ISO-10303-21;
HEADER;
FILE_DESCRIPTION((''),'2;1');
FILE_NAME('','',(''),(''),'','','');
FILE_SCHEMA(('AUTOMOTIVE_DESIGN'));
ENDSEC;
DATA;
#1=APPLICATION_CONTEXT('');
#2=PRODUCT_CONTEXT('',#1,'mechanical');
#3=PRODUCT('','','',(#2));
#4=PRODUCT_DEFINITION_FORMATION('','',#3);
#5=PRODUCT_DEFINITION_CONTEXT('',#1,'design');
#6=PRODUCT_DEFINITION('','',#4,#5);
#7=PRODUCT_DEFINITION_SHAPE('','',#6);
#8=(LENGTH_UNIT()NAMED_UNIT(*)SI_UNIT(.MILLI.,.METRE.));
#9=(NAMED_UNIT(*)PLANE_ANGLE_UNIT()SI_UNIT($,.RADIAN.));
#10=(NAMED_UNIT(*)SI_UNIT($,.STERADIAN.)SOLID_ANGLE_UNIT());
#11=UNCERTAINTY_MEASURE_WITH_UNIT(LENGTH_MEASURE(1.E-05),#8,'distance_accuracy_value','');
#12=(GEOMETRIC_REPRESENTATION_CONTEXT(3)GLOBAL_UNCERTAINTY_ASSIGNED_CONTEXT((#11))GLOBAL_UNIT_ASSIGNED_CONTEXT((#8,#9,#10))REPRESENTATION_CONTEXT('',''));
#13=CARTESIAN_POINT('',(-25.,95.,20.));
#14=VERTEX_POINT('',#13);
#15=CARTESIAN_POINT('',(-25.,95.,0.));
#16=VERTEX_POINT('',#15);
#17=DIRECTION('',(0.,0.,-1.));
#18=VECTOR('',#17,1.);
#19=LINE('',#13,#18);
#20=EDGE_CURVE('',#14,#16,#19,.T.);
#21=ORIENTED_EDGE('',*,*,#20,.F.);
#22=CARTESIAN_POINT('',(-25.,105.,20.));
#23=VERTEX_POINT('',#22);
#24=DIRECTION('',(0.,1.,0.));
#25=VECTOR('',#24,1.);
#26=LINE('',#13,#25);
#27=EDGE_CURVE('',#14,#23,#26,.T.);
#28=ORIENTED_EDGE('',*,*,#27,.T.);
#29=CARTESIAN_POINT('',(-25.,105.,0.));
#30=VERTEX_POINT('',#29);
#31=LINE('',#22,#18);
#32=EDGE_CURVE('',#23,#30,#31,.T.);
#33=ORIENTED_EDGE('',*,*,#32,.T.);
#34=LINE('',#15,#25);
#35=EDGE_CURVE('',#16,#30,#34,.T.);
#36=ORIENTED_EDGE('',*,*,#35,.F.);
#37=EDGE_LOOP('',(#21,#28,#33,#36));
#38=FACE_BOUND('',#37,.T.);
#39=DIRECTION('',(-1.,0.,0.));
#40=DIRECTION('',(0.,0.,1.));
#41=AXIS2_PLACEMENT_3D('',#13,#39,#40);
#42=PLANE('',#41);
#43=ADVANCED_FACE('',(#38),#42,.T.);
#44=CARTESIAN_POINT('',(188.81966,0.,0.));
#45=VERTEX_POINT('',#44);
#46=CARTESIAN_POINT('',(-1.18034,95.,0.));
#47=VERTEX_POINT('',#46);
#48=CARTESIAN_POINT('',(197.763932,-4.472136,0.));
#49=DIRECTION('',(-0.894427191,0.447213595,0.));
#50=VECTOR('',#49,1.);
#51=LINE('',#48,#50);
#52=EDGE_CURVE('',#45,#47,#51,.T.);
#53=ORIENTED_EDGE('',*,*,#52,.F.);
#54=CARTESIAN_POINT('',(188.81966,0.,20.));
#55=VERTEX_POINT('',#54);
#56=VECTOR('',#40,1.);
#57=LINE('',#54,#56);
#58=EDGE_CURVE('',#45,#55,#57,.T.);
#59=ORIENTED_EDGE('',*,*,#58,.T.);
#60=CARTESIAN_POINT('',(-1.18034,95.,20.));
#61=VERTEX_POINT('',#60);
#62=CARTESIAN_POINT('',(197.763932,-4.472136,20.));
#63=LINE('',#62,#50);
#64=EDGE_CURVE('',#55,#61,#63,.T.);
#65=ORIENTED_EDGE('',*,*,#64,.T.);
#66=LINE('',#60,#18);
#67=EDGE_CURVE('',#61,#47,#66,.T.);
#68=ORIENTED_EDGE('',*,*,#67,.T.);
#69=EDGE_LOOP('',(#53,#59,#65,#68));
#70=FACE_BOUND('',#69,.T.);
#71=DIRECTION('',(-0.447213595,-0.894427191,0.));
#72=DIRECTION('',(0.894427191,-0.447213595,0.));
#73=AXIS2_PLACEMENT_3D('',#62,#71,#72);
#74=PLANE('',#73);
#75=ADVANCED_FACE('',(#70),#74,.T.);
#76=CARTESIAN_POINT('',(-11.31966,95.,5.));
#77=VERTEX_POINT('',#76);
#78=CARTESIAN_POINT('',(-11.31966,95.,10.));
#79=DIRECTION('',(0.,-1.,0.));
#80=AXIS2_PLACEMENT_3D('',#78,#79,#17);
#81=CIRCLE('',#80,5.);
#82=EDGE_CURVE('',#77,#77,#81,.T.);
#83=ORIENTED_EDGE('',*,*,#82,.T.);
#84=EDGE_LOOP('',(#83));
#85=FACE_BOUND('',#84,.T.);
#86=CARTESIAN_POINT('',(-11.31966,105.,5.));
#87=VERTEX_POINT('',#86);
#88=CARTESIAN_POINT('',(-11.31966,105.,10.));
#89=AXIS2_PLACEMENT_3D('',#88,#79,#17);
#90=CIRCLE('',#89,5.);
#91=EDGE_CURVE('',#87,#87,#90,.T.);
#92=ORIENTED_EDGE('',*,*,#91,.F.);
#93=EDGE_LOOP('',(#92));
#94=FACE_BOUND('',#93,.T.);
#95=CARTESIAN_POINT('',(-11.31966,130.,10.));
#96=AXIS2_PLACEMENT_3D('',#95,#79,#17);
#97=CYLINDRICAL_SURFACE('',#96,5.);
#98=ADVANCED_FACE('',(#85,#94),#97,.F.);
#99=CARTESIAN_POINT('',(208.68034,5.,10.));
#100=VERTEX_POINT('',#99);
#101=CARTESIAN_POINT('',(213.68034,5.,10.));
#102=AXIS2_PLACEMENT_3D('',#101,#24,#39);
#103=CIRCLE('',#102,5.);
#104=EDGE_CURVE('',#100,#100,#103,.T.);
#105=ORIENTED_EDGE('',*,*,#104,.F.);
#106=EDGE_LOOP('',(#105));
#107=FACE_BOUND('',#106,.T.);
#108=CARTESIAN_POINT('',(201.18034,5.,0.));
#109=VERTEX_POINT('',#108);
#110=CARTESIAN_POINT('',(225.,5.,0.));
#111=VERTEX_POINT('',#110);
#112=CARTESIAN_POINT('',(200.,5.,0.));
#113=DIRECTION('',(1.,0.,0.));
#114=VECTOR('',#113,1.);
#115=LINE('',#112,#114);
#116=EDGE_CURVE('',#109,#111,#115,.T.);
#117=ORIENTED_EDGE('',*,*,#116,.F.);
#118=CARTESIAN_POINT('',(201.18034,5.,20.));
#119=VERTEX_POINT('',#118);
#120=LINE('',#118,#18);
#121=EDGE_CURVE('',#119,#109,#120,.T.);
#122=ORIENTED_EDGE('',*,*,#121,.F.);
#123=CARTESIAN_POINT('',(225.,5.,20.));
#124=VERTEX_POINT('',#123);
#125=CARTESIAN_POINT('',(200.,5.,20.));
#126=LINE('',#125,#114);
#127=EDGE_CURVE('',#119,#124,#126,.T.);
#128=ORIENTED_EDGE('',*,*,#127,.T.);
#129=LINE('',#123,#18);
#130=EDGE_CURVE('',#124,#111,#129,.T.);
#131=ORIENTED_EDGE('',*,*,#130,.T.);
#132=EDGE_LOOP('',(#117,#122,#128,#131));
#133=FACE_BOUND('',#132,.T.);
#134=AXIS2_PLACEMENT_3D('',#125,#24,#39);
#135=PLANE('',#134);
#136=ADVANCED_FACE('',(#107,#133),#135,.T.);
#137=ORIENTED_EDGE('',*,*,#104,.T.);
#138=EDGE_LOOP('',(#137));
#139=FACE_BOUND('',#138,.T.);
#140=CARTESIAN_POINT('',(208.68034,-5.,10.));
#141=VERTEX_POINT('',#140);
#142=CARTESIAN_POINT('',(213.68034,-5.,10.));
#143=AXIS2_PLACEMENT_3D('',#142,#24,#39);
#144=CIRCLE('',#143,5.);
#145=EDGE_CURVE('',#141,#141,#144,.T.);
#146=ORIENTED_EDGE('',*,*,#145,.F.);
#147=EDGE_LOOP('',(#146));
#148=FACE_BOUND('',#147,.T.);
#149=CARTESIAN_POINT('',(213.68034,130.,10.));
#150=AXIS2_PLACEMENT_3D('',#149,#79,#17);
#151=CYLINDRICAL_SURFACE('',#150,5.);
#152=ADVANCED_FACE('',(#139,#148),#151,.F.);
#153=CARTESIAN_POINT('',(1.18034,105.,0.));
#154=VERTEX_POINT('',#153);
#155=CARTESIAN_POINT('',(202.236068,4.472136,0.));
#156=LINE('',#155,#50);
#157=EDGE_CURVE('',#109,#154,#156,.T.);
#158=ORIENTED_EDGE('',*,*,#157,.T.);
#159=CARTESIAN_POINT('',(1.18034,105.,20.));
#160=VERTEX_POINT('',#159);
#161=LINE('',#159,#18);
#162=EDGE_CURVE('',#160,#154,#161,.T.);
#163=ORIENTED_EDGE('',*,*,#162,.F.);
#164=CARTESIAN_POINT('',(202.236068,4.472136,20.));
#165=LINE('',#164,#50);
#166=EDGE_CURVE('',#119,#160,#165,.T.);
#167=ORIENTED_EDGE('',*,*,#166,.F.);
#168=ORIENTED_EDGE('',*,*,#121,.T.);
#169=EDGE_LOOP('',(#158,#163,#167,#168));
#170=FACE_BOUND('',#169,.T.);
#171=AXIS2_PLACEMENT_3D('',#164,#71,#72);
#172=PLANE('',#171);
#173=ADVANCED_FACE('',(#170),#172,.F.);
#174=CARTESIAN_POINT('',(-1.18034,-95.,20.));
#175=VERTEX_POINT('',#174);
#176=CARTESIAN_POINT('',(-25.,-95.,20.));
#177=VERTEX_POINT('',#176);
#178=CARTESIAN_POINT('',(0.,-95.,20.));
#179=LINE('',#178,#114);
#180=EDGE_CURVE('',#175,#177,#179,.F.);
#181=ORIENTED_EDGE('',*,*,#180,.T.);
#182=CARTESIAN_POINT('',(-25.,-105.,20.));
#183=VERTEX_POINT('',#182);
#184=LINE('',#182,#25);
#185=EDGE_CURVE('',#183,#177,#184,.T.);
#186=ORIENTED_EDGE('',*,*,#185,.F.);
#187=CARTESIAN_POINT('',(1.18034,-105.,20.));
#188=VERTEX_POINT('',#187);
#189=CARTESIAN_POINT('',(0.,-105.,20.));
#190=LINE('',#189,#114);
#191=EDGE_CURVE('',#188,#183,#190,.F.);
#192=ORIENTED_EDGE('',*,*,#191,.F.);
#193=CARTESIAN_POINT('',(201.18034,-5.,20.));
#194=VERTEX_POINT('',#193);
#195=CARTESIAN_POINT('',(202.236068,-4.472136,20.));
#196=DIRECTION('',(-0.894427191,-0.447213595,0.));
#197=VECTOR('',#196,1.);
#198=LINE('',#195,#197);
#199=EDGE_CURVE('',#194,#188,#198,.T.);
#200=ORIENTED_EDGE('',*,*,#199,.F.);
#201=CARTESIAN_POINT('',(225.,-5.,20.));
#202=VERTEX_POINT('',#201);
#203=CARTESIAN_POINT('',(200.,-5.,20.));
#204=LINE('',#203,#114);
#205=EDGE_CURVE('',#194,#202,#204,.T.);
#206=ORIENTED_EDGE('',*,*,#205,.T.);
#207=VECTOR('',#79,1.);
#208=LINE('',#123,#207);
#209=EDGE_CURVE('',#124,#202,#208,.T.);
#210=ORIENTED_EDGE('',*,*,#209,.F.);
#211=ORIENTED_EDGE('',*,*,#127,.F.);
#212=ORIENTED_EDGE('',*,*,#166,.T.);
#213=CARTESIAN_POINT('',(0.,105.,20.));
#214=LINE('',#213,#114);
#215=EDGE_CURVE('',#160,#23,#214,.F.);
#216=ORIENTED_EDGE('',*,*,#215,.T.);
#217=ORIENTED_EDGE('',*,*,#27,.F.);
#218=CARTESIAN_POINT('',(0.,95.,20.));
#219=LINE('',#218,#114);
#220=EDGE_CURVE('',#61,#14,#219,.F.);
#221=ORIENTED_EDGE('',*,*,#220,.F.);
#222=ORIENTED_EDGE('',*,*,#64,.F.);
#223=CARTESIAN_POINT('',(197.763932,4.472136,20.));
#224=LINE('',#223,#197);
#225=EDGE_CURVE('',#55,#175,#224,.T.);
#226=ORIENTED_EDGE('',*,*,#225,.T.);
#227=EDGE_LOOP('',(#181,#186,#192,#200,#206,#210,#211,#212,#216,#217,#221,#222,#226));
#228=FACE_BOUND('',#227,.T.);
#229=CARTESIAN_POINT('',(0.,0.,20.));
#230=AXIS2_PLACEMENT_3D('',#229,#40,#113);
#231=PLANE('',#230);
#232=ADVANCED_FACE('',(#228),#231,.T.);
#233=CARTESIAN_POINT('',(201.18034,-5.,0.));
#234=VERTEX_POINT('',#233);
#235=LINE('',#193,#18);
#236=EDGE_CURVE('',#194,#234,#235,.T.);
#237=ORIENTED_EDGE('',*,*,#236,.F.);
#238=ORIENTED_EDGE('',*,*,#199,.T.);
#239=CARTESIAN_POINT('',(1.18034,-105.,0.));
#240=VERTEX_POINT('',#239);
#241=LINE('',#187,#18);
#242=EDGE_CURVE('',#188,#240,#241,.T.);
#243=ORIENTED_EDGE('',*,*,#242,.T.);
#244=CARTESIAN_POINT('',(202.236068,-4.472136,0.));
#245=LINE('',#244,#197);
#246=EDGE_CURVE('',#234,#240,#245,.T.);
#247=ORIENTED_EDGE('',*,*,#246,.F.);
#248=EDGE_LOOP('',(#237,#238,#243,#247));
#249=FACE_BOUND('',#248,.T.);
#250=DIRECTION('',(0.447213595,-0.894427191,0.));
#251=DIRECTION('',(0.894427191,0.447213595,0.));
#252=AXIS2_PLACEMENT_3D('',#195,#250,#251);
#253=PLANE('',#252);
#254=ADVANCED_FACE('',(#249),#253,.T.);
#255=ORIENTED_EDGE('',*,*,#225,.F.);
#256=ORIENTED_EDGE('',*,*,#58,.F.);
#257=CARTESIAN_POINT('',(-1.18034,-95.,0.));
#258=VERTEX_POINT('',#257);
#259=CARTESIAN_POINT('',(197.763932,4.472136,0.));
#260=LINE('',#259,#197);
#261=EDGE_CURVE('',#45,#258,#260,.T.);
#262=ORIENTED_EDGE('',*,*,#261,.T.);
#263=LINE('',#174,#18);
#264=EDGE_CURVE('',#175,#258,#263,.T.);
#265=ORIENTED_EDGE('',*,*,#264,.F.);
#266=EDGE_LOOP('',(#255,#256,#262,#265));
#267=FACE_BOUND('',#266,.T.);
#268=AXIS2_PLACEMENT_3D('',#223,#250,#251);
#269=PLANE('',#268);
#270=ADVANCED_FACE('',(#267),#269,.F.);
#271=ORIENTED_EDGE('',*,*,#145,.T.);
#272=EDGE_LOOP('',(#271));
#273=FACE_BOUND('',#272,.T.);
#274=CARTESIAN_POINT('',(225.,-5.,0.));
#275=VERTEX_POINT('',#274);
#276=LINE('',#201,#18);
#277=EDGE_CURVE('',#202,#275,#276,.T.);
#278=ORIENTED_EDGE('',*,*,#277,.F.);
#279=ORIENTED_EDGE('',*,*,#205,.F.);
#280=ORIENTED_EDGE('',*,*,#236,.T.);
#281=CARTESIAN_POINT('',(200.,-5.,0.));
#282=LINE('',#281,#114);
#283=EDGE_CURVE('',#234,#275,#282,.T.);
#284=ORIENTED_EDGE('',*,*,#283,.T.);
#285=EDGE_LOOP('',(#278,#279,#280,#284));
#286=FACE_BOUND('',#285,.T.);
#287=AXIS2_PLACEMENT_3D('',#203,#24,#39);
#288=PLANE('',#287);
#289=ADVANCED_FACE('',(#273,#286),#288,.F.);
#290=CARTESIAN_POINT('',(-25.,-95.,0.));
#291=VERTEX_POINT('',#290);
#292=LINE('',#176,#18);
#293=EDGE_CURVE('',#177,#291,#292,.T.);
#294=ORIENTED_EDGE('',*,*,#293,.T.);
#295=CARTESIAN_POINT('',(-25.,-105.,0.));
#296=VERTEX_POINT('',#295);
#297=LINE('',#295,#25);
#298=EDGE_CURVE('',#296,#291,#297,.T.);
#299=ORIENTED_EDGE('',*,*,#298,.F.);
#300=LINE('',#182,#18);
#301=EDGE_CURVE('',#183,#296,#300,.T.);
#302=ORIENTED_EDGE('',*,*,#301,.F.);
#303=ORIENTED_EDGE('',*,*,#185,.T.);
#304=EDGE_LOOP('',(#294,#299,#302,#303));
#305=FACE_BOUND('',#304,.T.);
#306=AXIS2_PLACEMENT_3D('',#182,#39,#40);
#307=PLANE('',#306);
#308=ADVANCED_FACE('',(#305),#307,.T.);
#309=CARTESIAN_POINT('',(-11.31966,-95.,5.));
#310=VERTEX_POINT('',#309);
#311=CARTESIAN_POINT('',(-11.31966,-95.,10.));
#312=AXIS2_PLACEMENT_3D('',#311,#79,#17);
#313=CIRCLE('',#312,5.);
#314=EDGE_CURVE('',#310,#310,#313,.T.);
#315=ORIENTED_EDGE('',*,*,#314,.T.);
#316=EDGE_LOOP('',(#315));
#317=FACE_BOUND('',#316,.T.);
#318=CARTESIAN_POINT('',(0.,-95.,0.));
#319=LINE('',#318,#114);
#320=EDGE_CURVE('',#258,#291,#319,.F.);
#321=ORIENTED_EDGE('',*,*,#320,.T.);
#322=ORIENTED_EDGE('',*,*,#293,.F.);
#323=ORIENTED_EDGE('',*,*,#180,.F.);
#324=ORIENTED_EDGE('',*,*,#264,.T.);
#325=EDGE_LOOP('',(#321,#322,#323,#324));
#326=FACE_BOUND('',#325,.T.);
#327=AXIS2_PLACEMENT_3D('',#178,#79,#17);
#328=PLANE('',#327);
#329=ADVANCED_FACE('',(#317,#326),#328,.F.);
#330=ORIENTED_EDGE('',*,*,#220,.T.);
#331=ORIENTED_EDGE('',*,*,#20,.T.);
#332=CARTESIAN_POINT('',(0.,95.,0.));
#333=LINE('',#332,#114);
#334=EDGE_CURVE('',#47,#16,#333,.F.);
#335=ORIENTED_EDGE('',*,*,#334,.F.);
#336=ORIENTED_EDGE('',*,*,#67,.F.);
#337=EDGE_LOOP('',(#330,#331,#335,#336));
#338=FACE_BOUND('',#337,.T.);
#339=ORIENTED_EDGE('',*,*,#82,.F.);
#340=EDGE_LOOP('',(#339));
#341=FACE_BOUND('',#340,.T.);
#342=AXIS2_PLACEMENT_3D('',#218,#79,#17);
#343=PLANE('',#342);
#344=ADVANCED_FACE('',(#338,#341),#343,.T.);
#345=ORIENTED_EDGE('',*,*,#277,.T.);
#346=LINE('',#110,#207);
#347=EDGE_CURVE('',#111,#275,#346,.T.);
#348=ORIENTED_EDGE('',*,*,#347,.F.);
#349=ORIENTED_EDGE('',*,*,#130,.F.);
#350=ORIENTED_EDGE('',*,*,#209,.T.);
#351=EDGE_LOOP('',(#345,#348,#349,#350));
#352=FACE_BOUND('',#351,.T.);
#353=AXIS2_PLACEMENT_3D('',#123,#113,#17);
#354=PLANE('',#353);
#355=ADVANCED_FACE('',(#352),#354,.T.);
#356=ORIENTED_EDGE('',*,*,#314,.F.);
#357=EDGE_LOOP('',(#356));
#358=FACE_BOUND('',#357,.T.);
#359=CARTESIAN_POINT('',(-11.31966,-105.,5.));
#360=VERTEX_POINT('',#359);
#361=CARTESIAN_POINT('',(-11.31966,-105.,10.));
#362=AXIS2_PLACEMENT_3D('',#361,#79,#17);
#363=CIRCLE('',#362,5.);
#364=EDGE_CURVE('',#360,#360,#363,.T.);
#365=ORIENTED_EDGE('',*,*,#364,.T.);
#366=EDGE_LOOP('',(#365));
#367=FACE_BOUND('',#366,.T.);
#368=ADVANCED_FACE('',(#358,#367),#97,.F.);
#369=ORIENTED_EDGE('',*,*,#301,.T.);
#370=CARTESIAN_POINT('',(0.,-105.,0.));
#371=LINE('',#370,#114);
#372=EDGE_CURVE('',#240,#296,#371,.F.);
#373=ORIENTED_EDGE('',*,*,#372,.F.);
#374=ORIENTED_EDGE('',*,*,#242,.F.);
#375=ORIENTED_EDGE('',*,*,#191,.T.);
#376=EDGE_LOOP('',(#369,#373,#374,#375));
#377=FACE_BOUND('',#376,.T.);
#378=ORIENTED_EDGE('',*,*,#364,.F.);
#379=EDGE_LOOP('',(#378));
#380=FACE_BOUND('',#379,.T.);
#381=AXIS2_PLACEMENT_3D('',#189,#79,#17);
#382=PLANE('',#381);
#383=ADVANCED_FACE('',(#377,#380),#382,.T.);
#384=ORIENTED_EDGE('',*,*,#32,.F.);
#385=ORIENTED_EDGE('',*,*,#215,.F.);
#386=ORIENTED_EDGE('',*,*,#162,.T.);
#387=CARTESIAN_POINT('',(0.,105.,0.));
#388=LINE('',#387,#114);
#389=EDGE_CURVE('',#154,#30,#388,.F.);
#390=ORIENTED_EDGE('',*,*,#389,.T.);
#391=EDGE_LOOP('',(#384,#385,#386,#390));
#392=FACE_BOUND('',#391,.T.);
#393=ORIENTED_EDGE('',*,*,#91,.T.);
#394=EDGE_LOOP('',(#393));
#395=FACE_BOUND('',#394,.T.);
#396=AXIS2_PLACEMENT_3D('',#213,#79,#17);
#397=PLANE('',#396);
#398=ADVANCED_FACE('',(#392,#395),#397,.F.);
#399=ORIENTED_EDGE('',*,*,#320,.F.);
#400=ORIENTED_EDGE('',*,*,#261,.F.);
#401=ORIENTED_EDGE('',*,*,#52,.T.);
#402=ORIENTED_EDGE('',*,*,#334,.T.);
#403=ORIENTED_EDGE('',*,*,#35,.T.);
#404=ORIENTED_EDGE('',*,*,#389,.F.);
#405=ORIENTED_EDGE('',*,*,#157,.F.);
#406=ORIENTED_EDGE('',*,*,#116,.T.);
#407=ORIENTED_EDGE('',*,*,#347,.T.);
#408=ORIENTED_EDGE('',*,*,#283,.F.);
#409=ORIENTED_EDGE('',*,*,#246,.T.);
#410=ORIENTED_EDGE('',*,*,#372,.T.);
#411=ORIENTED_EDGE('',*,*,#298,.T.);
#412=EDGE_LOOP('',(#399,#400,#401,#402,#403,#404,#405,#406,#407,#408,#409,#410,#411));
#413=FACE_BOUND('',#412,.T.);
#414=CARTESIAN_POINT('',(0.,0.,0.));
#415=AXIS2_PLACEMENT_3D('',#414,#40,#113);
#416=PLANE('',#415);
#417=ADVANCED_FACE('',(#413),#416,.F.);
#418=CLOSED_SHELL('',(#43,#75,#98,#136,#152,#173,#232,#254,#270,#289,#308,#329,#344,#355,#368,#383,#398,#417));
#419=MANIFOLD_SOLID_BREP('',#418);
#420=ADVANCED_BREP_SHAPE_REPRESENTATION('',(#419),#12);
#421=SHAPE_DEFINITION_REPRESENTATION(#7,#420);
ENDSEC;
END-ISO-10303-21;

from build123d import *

# Parameters (mm, degrees)
EXTRUDE_THIN4_DEPTH = 20
SKETCH2_R           = 5
CUT_EXTRUDE1_DEPTH  = 235


# Read off the part's stored shape, not the designer's step: Extrude-Thin4
with BuildPart() as part:
    # Extrude-Thin4 outline → Extrude-Thin4 (new body)
    with BuildSketch(Plane.XY):
        Polygon((201.180339887, 5), (1.180339887, 105), (-25, 105), (-25, 95), (-1.180339887, 95), (188.819660113, 0), (-1.180339887, -95), (-25, -95), (-25, -105), (1.180339887, -105), (201.180339887, -5), (225, -5), (225, 5), align=None)
    extrude(amount=EXTRUDE_THIN4_DEPTH)

    # Sketch2 → Cut-Extrude1 (cut)
    with BuildSketch(Plane.XZ.offset(105)):
        with Locations(Location((-11.319660113, 10, 0), (0, 0, 270))):
            Circle(SKETCH2_R)
        with Locations(Location((213.680339887, 10, 0), (0, 0, 180))):
            Circle(SKETCH2_R)
    extrude(amount=-CUT_EXTRUDE1_DEPTH, mode=Mode.SUBTRACT)


solid = part.part
